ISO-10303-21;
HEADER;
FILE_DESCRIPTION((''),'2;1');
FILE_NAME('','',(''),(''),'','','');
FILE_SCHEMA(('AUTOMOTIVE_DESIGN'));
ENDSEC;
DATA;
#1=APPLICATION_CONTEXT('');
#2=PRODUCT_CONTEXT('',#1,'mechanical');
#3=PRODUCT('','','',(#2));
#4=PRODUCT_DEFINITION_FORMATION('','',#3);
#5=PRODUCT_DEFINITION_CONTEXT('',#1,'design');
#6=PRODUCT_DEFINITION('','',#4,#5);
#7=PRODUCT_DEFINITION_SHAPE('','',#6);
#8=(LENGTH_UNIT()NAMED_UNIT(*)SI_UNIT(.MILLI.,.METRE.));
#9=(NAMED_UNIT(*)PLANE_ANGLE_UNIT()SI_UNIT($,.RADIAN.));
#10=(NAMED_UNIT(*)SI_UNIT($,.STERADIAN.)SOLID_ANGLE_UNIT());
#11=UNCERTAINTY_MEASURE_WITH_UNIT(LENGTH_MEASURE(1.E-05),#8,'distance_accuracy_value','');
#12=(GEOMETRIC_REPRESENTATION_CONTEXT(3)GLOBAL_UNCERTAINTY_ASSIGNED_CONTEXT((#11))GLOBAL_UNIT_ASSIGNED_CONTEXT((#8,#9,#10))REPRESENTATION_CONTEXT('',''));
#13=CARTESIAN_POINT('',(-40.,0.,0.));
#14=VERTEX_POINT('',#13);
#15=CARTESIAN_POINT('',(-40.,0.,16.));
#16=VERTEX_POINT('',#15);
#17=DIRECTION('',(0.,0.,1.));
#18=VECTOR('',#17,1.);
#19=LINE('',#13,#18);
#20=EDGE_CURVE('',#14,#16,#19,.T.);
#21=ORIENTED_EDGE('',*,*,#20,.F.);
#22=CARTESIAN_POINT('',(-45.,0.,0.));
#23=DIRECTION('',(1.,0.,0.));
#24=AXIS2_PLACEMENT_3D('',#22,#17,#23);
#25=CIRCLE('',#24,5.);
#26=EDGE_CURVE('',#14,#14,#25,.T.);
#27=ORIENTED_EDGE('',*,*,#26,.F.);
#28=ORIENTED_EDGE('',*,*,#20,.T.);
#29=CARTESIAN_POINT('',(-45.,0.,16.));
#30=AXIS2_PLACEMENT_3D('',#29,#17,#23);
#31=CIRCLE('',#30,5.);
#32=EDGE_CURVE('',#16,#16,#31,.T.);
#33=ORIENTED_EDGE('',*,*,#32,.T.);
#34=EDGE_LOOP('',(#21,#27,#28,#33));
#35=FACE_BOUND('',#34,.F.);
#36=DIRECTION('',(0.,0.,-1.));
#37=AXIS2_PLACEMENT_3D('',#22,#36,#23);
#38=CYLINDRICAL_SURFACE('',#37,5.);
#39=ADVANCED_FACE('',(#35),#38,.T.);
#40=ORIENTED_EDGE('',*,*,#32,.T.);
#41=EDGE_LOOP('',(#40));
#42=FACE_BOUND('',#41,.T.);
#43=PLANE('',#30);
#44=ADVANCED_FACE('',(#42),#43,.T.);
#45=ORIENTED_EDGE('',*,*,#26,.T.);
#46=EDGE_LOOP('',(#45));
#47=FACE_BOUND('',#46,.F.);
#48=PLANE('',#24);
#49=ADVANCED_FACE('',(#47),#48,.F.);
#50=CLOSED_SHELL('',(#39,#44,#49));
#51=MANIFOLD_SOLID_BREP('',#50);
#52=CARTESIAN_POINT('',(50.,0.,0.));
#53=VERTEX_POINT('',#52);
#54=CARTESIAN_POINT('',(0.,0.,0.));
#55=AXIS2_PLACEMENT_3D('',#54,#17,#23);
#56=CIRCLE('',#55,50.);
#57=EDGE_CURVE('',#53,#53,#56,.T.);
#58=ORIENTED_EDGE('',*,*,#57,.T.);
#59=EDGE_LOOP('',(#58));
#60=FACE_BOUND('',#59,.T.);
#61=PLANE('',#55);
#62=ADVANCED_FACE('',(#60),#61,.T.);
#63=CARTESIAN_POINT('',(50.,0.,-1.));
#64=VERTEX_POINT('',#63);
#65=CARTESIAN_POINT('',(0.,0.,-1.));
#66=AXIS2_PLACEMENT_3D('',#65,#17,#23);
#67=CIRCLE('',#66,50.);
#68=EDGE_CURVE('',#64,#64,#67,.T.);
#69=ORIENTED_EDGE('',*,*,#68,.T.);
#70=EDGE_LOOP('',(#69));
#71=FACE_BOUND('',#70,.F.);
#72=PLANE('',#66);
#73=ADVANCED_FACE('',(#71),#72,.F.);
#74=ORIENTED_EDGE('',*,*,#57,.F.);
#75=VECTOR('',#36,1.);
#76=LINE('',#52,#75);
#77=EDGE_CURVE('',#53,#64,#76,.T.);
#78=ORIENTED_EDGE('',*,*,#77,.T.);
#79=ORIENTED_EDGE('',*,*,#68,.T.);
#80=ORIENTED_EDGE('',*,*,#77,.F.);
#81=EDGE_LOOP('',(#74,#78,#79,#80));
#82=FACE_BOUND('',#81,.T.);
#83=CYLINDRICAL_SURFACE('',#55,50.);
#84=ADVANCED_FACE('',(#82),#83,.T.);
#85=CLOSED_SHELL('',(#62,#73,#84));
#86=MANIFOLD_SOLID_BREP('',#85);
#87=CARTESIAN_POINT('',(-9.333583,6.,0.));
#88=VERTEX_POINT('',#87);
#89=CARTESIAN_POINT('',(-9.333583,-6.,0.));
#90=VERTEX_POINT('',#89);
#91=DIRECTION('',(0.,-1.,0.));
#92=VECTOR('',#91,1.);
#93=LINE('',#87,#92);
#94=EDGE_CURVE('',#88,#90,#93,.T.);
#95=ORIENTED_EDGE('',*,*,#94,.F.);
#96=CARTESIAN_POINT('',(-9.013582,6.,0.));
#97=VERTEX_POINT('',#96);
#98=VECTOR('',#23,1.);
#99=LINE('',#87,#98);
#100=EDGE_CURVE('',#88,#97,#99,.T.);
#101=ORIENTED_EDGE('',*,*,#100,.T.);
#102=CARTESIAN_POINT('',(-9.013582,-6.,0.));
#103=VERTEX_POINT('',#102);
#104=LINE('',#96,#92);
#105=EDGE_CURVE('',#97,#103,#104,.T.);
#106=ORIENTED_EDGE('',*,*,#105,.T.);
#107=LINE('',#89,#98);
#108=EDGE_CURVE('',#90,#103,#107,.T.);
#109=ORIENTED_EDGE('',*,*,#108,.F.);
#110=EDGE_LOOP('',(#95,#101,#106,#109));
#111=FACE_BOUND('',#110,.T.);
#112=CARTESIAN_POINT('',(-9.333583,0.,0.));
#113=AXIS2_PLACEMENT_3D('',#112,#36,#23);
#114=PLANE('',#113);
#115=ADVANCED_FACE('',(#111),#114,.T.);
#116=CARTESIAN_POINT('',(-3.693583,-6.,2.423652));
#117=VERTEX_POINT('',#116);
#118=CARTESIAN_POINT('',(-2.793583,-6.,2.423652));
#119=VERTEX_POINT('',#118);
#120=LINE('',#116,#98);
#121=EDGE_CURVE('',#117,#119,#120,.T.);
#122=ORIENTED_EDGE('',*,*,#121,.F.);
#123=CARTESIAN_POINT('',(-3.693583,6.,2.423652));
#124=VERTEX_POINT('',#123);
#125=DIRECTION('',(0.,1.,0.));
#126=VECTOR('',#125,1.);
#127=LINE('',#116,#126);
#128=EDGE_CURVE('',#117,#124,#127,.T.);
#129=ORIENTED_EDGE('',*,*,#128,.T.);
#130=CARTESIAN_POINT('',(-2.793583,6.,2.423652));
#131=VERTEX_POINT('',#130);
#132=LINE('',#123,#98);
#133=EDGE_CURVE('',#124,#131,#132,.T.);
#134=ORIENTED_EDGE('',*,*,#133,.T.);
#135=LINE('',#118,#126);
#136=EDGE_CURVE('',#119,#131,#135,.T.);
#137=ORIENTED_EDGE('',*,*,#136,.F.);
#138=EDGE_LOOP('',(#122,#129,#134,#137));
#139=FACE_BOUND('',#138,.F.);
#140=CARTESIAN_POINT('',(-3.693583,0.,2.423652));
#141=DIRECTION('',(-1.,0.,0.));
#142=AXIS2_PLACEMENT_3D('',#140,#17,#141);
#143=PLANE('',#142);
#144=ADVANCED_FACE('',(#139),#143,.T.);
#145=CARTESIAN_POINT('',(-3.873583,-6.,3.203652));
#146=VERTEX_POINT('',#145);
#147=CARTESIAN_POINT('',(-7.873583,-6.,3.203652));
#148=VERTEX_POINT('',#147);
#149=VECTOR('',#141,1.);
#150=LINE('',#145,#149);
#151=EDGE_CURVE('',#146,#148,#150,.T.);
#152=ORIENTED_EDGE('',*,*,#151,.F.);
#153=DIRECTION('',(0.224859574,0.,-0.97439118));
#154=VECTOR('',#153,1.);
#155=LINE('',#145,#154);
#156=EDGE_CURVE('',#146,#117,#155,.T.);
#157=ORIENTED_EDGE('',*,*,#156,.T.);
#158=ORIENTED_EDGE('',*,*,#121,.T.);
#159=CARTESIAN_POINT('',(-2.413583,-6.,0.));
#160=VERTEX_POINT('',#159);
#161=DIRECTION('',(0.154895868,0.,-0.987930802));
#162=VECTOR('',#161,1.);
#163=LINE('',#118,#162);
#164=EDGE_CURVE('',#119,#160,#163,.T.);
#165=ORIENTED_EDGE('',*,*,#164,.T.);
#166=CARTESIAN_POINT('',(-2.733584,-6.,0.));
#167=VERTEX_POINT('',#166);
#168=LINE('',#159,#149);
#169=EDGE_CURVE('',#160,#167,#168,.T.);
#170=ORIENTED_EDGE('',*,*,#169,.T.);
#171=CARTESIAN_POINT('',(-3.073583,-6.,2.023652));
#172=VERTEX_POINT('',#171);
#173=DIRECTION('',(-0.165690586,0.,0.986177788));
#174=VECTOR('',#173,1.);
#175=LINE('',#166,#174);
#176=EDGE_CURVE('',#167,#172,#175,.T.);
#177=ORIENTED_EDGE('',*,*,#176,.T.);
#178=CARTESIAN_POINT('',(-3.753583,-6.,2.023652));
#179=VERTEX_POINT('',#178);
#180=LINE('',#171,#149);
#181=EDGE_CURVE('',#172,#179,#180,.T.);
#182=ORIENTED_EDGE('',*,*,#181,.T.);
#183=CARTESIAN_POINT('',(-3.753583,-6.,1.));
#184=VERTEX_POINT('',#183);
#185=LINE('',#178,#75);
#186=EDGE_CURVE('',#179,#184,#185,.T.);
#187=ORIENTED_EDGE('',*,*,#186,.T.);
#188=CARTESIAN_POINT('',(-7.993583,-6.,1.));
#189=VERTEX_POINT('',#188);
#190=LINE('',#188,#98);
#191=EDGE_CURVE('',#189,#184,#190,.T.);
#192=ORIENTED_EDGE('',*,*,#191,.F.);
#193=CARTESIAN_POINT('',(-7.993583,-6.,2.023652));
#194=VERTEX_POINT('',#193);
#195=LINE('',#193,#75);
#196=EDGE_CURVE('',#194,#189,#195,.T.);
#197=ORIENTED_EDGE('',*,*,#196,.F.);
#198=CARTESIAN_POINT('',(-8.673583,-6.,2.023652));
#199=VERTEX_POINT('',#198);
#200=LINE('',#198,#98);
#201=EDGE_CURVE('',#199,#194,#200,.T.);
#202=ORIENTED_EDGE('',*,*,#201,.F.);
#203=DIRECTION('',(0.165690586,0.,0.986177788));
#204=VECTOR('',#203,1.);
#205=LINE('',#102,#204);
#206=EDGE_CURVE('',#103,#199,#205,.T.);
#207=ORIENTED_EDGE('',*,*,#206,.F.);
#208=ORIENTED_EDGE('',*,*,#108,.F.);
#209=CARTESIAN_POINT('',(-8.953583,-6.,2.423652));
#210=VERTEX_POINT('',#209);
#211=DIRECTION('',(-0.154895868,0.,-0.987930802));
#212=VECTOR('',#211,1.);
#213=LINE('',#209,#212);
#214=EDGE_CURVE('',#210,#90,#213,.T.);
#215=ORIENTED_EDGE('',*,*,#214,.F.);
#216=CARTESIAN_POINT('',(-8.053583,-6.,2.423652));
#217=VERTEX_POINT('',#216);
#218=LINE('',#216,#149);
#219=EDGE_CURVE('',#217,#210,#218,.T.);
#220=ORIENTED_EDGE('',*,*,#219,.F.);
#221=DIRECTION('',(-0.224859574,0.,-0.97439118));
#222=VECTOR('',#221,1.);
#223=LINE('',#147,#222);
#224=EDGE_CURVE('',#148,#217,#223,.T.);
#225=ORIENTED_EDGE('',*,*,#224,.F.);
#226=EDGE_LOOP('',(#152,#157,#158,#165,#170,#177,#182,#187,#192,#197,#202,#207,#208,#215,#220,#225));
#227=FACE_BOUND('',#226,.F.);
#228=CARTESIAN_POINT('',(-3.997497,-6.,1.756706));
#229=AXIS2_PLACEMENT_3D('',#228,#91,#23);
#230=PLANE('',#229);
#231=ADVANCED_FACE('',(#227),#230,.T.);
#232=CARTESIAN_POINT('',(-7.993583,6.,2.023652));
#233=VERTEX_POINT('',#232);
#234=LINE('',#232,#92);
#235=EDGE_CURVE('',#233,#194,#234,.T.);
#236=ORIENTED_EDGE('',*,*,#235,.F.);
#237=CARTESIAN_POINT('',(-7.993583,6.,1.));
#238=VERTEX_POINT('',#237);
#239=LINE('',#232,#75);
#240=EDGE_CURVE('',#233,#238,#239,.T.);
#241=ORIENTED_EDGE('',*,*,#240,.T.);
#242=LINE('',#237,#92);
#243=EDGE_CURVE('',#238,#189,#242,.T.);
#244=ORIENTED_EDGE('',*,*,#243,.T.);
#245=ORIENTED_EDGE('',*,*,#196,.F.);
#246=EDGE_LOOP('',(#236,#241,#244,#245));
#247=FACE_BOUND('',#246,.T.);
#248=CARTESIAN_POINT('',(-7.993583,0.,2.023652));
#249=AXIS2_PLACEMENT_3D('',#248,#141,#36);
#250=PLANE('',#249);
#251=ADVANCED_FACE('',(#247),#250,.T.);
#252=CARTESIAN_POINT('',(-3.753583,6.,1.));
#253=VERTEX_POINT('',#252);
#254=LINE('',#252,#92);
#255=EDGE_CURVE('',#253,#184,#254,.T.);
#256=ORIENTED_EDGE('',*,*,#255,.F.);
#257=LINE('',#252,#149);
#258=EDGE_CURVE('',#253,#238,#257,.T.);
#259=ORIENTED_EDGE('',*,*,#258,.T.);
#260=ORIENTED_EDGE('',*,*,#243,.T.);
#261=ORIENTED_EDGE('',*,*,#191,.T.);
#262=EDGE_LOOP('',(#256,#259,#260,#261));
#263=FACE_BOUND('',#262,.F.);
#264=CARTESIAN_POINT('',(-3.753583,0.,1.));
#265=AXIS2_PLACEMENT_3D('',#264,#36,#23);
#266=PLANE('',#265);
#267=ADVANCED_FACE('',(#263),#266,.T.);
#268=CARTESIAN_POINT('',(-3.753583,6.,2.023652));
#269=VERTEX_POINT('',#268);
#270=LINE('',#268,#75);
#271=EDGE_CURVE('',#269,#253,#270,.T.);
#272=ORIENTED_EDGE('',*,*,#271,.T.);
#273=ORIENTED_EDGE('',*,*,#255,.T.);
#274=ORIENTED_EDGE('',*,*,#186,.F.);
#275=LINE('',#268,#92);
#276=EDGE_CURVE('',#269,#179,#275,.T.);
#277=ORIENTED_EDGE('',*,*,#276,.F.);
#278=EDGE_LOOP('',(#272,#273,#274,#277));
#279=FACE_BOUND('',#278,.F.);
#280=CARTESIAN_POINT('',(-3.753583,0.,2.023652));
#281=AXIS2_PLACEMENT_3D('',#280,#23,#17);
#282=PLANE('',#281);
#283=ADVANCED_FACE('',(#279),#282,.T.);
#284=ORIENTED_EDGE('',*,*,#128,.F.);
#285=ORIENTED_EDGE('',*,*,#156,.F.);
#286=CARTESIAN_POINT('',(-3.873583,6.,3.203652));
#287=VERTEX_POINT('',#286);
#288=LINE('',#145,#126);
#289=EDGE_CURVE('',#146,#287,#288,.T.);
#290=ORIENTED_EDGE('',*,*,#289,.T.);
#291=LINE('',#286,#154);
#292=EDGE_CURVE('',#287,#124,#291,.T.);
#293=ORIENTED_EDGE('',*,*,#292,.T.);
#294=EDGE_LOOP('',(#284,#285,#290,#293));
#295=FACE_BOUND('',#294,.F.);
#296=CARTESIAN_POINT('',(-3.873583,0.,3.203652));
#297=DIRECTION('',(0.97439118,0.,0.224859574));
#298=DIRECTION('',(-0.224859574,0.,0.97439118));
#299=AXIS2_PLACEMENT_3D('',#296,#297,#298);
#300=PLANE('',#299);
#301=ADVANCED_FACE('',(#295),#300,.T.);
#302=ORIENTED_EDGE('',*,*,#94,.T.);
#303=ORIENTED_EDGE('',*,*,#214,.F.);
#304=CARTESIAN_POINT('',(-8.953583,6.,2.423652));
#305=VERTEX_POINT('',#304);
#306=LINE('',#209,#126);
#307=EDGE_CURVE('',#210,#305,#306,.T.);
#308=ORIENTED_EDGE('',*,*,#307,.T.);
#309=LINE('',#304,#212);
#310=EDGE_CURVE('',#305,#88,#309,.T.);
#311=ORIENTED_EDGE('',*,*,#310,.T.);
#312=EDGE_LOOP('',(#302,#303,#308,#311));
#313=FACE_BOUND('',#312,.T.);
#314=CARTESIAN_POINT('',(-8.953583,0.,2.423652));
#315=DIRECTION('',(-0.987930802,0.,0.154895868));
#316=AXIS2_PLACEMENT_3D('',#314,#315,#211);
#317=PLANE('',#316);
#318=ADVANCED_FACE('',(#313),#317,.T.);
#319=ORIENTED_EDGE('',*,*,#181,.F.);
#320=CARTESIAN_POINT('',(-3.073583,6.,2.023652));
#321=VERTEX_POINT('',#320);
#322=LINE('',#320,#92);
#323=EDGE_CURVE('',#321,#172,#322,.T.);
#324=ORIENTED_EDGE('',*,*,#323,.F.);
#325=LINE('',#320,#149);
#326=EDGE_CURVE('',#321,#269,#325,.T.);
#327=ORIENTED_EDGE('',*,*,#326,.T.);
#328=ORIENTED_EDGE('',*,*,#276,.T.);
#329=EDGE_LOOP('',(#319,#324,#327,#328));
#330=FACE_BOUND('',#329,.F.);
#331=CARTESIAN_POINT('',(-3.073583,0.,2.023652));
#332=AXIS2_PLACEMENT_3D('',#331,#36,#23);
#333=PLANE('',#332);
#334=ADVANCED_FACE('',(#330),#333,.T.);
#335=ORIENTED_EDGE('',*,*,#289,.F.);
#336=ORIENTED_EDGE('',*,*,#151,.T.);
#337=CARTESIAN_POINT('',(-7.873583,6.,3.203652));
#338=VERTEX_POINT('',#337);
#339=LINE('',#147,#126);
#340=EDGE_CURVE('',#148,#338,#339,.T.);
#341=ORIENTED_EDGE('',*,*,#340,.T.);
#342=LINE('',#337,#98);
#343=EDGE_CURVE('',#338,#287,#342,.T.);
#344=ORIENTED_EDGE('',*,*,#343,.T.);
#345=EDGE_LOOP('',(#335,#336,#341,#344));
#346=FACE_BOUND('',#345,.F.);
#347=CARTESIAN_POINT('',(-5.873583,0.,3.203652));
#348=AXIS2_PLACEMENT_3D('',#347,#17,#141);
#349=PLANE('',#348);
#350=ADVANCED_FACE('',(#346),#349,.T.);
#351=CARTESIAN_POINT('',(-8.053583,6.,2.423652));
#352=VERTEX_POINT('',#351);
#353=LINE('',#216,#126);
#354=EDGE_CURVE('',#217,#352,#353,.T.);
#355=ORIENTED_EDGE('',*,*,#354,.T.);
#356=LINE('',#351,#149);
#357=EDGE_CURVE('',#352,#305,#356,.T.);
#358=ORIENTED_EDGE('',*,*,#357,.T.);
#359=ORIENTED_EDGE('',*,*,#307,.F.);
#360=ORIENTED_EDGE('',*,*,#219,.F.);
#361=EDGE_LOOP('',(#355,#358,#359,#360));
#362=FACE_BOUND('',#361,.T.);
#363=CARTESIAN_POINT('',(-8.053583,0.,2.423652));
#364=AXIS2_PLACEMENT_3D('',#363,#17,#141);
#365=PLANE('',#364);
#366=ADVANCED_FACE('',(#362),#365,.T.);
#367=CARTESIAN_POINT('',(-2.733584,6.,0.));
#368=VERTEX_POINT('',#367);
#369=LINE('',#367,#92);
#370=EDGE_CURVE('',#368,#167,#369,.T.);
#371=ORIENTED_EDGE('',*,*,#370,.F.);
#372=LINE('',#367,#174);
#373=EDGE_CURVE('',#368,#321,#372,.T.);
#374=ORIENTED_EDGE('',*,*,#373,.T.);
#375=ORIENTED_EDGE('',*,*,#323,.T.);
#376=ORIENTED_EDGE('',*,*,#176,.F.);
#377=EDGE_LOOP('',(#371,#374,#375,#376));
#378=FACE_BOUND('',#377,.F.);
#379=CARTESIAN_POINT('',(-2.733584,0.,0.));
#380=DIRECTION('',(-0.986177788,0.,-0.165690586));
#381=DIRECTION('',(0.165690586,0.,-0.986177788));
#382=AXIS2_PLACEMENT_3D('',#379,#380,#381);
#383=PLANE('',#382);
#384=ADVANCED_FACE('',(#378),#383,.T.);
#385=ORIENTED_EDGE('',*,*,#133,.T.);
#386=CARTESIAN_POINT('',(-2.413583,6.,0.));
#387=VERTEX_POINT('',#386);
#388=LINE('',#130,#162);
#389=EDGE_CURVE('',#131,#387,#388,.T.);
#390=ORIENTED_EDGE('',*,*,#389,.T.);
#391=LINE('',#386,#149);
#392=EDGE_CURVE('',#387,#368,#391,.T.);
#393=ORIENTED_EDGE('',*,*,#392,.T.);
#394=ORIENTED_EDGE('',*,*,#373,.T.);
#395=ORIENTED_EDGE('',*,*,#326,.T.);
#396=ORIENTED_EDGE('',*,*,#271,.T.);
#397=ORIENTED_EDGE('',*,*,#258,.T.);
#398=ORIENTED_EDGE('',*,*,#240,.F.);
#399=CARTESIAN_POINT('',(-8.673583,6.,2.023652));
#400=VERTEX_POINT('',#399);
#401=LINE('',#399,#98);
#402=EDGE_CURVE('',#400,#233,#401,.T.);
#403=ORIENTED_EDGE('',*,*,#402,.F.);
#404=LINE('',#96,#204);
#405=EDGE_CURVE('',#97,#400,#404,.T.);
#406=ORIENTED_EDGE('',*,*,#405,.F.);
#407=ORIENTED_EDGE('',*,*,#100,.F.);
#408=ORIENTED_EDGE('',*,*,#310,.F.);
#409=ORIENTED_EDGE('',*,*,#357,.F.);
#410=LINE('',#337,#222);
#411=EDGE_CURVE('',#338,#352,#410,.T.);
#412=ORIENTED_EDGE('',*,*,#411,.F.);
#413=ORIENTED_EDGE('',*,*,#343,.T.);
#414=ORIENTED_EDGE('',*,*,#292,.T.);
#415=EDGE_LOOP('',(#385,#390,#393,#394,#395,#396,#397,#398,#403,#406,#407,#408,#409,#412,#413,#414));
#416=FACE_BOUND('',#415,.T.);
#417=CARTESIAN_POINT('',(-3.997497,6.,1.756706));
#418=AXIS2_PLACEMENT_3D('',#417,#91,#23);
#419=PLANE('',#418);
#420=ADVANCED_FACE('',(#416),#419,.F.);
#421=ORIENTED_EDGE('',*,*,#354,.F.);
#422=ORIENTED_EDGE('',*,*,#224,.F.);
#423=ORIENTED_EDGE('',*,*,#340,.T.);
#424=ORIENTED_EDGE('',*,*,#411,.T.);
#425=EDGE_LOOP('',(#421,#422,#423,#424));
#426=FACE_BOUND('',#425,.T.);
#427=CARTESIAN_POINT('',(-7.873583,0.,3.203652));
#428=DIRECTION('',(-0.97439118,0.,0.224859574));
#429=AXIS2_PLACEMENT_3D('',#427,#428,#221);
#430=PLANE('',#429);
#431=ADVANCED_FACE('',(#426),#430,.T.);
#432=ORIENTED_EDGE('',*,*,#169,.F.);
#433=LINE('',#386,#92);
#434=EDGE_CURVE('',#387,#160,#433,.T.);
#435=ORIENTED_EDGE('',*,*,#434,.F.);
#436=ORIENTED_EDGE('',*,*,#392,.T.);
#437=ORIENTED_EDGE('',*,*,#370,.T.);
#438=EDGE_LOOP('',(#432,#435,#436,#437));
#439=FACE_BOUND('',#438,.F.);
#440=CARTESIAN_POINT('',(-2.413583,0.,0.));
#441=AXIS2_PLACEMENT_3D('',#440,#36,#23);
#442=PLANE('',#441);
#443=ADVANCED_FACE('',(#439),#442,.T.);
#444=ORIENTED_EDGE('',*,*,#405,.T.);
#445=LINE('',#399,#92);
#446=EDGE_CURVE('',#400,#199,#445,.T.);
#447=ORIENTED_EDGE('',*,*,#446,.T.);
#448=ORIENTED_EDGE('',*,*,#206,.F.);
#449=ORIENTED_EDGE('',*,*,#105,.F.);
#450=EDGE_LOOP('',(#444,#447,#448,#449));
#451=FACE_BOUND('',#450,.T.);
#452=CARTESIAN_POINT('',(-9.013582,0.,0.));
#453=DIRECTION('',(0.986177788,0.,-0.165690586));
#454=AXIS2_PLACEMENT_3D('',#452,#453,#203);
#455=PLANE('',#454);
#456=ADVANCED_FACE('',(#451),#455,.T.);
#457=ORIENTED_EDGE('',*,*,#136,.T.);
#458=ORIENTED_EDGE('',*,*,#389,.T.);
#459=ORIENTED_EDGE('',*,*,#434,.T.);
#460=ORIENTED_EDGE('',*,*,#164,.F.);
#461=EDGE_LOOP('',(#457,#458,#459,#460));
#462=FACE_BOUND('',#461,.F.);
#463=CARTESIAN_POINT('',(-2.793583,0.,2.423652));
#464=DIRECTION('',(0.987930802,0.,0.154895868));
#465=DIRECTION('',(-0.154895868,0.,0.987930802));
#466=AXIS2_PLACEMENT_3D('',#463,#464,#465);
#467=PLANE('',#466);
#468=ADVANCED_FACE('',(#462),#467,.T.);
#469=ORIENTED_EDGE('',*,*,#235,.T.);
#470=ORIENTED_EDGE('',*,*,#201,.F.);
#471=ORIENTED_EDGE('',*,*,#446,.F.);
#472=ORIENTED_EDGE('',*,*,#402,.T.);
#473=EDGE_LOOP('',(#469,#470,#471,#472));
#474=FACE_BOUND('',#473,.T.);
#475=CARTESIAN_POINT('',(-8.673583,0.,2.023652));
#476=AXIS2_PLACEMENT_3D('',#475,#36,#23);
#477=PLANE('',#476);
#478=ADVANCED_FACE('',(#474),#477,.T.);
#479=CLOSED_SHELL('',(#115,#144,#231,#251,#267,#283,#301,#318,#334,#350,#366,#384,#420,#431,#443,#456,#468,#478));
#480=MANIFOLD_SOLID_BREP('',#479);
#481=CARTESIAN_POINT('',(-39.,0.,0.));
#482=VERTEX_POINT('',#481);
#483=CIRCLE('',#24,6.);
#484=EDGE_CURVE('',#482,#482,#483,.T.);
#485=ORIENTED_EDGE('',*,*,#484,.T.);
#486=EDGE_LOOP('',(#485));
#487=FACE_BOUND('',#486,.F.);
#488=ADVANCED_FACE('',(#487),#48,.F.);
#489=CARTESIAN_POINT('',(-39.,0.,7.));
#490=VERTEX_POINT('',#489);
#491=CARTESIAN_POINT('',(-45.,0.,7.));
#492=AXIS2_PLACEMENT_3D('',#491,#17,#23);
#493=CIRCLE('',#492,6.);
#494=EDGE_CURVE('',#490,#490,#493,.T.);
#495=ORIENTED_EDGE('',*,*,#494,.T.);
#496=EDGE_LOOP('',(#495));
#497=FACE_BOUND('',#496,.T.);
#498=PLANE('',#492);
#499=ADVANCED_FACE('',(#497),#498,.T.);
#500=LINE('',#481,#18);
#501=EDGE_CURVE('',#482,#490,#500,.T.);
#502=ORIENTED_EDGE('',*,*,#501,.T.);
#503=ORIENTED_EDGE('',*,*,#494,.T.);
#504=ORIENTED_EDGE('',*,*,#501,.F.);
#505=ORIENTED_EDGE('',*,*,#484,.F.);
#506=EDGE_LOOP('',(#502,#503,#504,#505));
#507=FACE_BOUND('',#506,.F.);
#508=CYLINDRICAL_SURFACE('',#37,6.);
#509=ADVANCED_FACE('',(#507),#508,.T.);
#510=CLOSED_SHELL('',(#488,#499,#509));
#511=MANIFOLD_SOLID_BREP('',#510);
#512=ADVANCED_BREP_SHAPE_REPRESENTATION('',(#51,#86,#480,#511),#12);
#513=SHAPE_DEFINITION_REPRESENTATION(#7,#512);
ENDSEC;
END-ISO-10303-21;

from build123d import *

# Parameters (mm, degrees)
F0_R     = 50
F1_DEPTH = 1
F2_R     = 5
F3_DEPTH = 16
F5_DEPTH = 6
F8_R     = 6
F9_DEPTH = 7


with BuildPart() as f1:
    # F0 (on Top) → F1 (new body)
    with BuildSketch(Plane.XY):
        Circle(F0_R)
    extrude(amount=-F1_DEPTH)


with BuildPart() as f3:
    # F2 (on Top) → F3 (new body)
    with BuildSketch(Plane.XY):
        with Locations((-45, 0)):
            Circle(F2_R)
    extrude(amount=F3_DEPTH)


with BuildPart() as f5:
    # F4 (on Front) → F5 (new body, symmetric)
    with BuildSketch(Plane.XZ):
        Polygon((-8.9535827212, 2.4236521956), (-9.3335827271, 0), (-9.0135823465, 0), (-8.6735826855, 2.0236521658), (-7.9935827688, 2.0236521658), (-7.9935827688, 1), (-5.8735829234, 1), (-5.8735829234, 3.2036522313), (-7.8735829234, 3.2036522313), (-8.0535829888, 2.4236521956), align=None)
    extrude(amount=F5_DEPTH, both=True)

    # F6: F5 across face


with BuildPart() as f5_1:
    add(f5.part)
    add(f5.part.mirror(Plane(origin=(-5.8735829234, 0, 2.1018261156), x_dir=(0, 1, 0), z_dir=(1, 0, 0))))


with BuildPart() as f9:
    # F8 (on Top) → F9 (new body)
    with BuildSketch(Plane.XY):
        with Locations((-45, 0)):
            Circle(F8_R)
    extrude(amount=F9_DEPTH)


solid = Compound([f1.part, f3.part, f5_1.part, f9.part])
